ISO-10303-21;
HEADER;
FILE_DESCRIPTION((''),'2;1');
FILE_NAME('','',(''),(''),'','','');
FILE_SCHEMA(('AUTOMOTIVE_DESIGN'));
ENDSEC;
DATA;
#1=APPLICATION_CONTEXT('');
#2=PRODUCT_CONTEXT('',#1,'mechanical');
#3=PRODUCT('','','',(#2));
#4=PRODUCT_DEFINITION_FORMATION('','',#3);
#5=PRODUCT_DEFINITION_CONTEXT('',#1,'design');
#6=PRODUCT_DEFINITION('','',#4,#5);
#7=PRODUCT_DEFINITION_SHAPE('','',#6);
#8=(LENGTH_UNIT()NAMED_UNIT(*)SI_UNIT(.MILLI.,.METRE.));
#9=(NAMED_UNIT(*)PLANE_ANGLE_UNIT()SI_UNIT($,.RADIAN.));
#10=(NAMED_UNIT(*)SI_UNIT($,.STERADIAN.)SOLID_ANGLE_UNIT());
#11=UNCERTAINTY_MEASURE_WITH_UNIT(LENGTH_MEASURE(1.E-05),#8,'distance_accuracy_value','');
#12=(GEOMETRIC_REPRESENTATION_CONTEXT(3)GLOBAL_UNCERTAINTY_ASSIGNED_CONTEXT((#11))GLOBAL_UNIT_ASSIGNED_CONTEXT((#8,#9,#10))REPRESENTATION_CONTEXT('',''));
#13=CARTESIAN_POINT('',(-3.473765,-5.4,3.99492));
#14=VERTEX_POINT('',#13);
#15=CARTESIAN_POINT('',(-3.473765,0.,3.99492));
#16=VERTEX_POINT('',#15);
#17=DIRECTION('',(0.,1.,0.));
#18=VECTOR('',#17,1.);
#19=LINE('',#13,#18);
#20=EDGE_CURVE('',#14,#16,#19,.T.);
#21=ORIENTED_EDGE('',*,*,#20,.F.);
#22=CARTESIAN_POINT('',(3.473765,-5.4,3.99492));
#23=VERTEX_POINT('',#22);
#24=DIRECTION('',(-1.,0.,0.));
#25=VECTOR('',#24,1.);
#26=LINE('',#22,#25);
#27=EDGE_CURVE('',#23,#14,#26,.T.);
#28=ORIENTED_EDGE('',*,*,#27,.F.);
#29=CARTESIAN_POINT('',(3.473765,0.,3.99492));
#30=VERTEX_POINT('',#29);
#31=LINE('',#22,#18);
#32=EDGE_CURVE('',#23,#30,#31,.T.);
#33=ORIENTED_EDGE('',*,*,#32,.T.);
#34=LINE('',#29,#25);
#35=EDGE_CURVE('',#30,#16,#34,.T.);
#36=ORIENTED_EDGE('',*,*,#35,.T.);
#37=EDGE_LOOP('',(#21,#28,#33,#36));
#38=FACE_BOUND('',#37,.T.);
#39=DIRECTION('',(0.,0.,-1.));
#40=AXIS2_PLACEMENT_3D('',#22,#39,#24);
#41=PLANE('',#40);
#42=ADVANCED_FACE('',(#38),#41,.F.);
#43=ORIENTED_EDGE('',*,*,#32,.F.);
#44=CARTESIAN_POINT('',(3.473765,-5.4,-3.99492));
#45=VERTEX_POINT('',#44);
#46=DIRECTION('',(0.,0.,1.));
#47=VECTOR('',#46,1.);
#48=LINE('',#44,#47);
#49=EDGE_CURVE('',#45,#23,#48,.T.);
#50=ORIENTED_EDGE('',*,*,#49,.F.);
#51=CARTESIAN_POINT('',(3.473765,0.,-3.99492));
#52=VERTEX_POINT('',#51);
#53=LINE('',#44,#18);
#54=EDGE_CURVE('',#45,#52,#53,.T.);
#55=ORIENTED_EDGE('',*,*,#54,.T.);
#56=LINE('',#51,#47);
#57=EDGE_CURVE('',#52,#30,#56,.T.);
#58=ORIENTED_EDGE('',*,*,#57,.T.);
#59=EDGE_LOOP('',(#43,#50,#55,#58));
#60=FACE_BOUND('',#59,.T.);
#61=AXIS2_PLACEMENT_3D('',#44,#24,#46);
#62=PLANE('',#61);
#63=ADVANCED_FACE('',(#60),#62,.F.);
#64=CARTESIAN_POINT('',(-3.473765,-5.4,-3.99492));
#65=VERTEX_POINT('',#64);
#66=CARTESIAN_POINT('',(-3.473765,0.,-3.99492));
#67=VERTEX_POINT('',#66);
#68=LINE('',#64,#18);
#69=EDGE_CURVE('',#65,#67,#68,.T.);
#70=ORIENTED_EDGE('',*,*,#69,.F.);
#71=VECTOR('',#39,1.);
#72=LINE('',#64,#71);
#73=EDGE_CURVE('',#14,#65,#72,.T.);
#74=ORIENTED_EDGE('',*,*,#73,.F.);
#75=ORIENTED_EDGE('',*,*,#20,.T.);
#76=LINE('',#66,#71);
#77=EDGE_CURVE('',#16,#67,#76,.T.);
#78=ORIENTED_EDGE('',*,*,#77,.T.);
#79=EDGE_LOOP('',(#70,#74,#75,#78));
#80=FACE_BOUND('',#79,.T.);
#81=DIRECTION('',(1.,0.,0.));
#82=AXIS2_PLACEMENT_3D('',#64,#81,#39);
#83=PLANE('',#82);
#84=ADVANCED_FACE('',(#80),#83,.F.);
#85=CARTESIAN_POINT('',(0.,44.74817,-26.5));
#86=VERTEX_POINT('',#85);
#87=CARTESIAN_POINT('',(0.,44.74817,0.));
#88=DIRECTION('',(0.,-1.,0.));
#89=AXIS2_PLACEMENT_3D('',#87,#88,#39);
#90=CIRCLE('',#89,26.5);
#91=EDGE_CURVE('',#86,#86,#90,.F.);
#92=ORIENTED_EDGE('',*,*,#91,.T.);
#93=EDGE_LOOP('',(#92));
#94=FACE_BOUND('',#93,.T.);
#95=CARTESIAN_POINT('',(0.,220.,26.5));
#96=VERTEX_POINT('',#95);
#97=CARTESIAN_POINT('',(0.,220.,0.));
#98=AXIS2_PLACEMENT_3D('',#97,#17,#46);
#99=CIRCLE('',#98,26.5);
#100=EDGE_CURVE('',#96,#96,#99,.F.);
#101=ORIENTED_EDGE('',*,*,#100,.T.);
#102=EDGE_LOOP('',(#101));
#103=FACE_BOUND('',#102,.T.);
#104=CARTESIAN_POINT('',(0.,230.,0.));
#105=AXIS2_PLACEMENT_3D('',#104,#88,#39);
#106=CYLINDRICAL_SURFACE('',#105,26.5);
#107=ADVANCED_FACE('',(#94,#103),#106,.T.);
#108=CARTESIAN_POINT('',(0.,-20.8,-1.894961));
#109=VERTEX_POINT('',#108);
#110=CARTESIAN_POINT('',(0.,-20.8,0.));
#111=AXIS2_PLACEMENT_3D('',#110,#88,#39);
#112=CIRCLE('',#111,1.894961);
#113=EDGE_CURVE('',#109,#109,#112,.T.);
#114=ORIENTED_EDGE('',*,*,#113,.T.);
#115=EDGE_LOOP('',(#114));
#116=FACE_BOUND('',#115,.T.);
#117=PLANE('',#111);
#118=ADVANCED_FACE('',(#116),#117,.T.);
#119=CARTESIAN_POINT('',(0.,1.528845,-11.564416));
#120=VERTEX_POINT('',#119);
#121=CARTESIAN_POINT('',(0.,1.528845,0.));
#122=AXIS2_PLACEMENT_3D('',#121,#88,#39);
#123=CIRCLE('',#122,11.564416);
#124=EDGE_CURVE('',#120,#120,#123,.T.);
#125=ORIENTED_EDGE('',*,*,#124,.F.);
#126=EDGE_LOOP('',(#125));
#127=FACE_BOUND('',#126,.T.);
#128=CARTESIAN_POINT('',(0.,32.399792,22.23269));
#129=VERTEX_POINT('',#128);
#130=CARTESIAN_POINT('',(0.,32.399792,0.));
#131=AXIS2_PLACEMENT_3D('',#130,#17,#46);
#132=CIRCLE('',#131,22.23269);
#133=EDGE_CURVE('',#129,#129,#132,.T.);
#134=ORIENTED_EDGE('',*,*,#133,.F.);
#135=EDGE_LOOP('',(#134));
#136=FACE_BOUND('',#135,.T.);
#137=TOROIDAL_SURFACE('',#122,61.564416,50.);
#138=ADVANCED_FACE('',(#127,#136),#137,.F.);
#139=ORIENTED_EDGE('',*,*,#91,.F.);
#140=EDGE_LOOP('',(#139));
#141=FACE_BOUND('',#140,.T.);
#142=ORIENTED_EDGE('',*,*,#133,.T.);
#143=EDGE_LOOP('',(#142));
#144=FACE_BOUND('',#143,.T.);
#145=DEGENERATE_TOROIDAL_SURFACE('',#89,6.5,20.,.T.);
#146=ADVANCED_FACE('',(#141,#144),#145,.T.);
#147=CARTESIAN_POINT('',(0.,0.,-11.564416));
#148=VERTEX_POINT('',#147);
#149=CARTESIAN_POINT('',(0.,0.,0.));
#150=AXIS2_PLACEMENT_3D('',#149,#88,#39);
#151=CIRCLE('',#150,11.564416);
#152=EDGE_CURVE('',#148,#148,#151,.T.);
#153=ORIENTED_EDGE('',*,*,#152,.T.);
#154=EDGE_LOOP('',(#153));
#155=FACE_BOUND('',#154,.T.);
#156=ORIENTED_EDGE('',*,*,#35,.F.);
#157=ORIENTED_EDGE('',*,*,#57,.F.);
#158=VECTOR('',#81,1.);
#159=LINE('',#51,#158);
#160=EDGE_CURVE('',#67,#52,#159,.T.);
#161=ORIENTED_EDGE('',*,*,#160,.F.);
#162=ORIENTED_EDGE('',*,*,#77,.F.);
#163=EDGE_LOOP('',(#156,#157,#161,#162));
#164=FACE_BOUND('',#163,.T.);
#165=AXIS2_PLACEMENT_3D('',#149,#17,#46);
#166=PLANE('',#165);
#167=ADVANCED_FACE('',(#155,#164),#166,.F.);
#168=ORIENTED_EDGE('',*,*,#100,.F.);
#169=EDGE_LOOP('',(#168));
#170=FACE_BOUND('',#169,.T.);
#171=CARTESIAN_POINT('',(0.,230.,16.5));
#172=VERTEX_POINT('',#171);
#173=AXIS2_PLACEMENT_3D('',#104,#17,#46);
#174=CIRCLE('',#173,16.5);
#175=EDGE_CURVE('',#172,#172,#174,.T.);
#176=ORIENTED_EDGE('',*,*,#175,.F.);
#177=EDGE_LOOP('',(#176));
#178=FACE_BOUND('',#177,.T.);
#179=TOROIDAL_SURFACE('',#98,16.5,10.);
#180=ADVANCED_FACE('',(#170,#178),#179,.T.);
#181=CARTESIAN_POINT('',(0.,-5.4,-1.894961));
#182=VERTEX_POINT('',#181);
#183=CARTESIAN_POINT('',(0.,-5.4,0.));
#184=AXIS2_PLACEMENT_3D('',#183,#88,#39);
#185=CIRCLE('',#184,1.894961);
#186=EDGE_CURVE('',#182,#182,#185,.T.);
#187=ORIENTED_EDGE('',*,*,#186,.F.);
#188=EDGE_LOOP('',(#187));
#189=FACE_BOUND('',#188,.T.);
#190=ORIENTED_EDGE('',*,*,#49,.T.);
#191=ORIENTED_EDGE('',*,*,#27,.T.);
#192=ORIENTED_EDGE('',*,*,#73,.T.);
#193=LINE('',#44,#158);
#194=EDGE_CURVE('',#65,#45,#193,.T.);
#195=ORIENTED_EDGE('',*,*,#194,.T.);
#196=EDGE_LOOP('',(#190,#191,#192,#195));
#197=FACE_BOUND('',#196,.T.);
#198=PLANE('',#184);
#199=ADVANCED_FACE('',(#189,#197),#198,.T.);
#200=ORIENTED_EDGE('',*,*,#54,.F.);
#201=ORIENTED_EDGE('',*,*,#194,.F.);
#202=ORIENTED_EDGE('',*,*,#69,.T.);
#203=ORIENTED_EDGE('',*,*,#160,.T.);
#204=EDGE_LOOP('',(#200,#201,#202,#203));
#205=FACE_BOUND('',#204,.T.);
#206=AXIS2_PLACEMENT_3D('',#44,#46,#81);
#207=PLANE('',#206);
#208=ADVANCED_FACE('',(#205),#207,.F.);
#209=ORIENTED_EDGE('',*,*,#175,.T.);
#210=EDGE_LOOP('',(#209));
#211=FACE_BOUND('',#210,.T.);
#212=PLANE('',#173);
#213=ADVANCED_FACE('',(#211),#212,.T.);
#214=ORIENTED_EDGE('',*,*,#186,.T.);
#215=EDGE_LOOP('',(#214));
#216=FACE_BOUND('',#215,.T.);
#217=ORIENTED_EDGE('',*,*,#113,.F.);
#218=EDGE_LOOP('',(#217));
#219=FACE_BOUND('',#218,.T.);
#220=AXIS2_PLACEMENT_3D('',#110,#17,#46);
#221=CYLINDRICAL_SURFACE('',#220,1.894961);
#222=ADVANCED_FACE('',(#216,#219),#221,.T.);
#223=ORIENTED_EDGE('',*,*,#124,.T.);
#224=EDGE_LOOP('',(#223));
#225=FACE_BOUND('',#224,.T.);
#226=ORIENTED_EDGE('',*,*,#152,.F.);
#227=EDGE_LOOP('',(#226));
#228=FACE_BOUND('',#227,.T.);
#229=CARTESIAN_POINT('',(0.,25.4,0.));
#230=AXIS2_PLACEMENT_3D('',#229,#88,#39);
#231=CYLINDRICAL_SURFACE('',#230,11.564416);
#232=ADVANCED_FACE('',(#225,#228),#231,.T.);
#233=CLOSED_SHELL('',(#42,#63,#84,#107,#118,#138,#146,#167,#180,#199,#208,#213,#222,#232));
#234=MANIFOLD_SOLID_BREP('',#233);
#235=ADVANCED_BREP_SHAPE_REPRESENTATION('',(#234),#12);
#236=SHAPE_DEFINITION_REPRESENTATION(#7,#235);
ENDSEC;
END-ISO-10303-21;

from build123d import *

# Parameters (mm, degrees)
SKETCH1_R           = 26.5
BOSS_EXTRUDE1_DEPTH = 230
SKETCH2_R           = 26.5
SKETCH2_R_2         = 11.564416293
CUT_EXTRUDE1_DEPTH  = 25.4
FILLET1_R           = 20
FILLET2_R           = 50
FILLET3_R           = 10
SKETCH3_W           = 6.947530086
SKETCH3_H           = 7.989839498
BOSS_EXTRUDE2_DEPTH = 5.4
SKETCH4_R           = 1.894960562
BOSS_EXTRUDE3_DEPTH = 15.4


with BuildPart() as part:
    # Sketch1 → Boss-Extrude1 (new body)
    with BuildSketch(Plane(origin=(0, 0, 0), x_dir=(1, 0, 0), z_dir=(0, 1, 0))):
        with Locations(Location((0, 0, 0), (0, 0, 270))):
            Circle(SKETCH1_R)
    extrude(amount=BOSS_EXTRUDE1_DEPTH)

    # Sketch2 → Cut-Extrude1 (cut)
    with BuildSketch(Plane.XZ):
        with Locations(Location((0, 0, 0), (0, 0, 270))):
            Circle(SKETCH2_R)
        with Locations(Location((0, 0, 0), (0, 0, 270))):
            Circle(SKETCH2_R_2, mode=Mode.SUBTRACT)
    extrude(amount=-CUT_EXTRUDE1_DEPTH, mode=Mode.SUBTRACT)

    # Fillet1
    # the kernel refuses this fillet: 20 mm, written as the material it takes off along each edge
    with BuildSketch(Plane(origin=(0, 25.4, 0), x_dir=(0, 0, 1), z_dir=(-1, 0, 0))) as fillet1_piece_1:
        with BuildLine():
            CenterArc((6.5, 19.348170136), FILLET1_R, 284.668185606, 75.331814394)
            Line((11.564416293, 0), (11.665704619, -0.386963403))
            ThreePointArc((11.665704619, -0.386963403), (19.032208147, -0.4), (26.5, -0.4))
            Line((26.5, -0.4), (26.9, 0))
            Line((26.9, 0), (26.9, 19.348170136))
            Line((26.9, 19.348170136), (26.5, 19.348170136))
        make_face()
    revolve(axis=Axis((0, 25.4, 0), (0, 1, 0)), mode=Mode.SUBTRACT)

    # Fillet2
    fillet2_edges = [part.edges().sort_by_distance(p)[0] for p in [
        (11.564416293, 25.4, 0),
    ]]
    fillet(fillet2_edges, radius=FILLET2_R)

    # Fillet3
    fillet3_edges = [part.edges().sort_by_distance(p)[0] for p in [
        (0, 230, -26.5),
    ]]
    fillet(fillet3_edges, radius=FILLET3_R)

    # Sketch3 → Boss-Extrude2 (add)
    with BuildSketch(Plane.XZ):
        Rectangle(SKETCH3_W, SKETCH3_H)
    extrude(amount=BOSS_EXTRUDE2_DEPTH)

    # Sketch4 → Boss-Extrude3 (add)
    with BuildSketch(Plane(origin=(0, -5.4, 0), x_dir=(-1, 0, 0), z_dir=(0, -1, 0))):
        with Locations(Location((0, 0, 0), (0, 0, 90))):
            Circle(SKETCH4_R)
    extrude(amount=BOSS_EXTRUDE3_DEPTH)


solid = part.part
